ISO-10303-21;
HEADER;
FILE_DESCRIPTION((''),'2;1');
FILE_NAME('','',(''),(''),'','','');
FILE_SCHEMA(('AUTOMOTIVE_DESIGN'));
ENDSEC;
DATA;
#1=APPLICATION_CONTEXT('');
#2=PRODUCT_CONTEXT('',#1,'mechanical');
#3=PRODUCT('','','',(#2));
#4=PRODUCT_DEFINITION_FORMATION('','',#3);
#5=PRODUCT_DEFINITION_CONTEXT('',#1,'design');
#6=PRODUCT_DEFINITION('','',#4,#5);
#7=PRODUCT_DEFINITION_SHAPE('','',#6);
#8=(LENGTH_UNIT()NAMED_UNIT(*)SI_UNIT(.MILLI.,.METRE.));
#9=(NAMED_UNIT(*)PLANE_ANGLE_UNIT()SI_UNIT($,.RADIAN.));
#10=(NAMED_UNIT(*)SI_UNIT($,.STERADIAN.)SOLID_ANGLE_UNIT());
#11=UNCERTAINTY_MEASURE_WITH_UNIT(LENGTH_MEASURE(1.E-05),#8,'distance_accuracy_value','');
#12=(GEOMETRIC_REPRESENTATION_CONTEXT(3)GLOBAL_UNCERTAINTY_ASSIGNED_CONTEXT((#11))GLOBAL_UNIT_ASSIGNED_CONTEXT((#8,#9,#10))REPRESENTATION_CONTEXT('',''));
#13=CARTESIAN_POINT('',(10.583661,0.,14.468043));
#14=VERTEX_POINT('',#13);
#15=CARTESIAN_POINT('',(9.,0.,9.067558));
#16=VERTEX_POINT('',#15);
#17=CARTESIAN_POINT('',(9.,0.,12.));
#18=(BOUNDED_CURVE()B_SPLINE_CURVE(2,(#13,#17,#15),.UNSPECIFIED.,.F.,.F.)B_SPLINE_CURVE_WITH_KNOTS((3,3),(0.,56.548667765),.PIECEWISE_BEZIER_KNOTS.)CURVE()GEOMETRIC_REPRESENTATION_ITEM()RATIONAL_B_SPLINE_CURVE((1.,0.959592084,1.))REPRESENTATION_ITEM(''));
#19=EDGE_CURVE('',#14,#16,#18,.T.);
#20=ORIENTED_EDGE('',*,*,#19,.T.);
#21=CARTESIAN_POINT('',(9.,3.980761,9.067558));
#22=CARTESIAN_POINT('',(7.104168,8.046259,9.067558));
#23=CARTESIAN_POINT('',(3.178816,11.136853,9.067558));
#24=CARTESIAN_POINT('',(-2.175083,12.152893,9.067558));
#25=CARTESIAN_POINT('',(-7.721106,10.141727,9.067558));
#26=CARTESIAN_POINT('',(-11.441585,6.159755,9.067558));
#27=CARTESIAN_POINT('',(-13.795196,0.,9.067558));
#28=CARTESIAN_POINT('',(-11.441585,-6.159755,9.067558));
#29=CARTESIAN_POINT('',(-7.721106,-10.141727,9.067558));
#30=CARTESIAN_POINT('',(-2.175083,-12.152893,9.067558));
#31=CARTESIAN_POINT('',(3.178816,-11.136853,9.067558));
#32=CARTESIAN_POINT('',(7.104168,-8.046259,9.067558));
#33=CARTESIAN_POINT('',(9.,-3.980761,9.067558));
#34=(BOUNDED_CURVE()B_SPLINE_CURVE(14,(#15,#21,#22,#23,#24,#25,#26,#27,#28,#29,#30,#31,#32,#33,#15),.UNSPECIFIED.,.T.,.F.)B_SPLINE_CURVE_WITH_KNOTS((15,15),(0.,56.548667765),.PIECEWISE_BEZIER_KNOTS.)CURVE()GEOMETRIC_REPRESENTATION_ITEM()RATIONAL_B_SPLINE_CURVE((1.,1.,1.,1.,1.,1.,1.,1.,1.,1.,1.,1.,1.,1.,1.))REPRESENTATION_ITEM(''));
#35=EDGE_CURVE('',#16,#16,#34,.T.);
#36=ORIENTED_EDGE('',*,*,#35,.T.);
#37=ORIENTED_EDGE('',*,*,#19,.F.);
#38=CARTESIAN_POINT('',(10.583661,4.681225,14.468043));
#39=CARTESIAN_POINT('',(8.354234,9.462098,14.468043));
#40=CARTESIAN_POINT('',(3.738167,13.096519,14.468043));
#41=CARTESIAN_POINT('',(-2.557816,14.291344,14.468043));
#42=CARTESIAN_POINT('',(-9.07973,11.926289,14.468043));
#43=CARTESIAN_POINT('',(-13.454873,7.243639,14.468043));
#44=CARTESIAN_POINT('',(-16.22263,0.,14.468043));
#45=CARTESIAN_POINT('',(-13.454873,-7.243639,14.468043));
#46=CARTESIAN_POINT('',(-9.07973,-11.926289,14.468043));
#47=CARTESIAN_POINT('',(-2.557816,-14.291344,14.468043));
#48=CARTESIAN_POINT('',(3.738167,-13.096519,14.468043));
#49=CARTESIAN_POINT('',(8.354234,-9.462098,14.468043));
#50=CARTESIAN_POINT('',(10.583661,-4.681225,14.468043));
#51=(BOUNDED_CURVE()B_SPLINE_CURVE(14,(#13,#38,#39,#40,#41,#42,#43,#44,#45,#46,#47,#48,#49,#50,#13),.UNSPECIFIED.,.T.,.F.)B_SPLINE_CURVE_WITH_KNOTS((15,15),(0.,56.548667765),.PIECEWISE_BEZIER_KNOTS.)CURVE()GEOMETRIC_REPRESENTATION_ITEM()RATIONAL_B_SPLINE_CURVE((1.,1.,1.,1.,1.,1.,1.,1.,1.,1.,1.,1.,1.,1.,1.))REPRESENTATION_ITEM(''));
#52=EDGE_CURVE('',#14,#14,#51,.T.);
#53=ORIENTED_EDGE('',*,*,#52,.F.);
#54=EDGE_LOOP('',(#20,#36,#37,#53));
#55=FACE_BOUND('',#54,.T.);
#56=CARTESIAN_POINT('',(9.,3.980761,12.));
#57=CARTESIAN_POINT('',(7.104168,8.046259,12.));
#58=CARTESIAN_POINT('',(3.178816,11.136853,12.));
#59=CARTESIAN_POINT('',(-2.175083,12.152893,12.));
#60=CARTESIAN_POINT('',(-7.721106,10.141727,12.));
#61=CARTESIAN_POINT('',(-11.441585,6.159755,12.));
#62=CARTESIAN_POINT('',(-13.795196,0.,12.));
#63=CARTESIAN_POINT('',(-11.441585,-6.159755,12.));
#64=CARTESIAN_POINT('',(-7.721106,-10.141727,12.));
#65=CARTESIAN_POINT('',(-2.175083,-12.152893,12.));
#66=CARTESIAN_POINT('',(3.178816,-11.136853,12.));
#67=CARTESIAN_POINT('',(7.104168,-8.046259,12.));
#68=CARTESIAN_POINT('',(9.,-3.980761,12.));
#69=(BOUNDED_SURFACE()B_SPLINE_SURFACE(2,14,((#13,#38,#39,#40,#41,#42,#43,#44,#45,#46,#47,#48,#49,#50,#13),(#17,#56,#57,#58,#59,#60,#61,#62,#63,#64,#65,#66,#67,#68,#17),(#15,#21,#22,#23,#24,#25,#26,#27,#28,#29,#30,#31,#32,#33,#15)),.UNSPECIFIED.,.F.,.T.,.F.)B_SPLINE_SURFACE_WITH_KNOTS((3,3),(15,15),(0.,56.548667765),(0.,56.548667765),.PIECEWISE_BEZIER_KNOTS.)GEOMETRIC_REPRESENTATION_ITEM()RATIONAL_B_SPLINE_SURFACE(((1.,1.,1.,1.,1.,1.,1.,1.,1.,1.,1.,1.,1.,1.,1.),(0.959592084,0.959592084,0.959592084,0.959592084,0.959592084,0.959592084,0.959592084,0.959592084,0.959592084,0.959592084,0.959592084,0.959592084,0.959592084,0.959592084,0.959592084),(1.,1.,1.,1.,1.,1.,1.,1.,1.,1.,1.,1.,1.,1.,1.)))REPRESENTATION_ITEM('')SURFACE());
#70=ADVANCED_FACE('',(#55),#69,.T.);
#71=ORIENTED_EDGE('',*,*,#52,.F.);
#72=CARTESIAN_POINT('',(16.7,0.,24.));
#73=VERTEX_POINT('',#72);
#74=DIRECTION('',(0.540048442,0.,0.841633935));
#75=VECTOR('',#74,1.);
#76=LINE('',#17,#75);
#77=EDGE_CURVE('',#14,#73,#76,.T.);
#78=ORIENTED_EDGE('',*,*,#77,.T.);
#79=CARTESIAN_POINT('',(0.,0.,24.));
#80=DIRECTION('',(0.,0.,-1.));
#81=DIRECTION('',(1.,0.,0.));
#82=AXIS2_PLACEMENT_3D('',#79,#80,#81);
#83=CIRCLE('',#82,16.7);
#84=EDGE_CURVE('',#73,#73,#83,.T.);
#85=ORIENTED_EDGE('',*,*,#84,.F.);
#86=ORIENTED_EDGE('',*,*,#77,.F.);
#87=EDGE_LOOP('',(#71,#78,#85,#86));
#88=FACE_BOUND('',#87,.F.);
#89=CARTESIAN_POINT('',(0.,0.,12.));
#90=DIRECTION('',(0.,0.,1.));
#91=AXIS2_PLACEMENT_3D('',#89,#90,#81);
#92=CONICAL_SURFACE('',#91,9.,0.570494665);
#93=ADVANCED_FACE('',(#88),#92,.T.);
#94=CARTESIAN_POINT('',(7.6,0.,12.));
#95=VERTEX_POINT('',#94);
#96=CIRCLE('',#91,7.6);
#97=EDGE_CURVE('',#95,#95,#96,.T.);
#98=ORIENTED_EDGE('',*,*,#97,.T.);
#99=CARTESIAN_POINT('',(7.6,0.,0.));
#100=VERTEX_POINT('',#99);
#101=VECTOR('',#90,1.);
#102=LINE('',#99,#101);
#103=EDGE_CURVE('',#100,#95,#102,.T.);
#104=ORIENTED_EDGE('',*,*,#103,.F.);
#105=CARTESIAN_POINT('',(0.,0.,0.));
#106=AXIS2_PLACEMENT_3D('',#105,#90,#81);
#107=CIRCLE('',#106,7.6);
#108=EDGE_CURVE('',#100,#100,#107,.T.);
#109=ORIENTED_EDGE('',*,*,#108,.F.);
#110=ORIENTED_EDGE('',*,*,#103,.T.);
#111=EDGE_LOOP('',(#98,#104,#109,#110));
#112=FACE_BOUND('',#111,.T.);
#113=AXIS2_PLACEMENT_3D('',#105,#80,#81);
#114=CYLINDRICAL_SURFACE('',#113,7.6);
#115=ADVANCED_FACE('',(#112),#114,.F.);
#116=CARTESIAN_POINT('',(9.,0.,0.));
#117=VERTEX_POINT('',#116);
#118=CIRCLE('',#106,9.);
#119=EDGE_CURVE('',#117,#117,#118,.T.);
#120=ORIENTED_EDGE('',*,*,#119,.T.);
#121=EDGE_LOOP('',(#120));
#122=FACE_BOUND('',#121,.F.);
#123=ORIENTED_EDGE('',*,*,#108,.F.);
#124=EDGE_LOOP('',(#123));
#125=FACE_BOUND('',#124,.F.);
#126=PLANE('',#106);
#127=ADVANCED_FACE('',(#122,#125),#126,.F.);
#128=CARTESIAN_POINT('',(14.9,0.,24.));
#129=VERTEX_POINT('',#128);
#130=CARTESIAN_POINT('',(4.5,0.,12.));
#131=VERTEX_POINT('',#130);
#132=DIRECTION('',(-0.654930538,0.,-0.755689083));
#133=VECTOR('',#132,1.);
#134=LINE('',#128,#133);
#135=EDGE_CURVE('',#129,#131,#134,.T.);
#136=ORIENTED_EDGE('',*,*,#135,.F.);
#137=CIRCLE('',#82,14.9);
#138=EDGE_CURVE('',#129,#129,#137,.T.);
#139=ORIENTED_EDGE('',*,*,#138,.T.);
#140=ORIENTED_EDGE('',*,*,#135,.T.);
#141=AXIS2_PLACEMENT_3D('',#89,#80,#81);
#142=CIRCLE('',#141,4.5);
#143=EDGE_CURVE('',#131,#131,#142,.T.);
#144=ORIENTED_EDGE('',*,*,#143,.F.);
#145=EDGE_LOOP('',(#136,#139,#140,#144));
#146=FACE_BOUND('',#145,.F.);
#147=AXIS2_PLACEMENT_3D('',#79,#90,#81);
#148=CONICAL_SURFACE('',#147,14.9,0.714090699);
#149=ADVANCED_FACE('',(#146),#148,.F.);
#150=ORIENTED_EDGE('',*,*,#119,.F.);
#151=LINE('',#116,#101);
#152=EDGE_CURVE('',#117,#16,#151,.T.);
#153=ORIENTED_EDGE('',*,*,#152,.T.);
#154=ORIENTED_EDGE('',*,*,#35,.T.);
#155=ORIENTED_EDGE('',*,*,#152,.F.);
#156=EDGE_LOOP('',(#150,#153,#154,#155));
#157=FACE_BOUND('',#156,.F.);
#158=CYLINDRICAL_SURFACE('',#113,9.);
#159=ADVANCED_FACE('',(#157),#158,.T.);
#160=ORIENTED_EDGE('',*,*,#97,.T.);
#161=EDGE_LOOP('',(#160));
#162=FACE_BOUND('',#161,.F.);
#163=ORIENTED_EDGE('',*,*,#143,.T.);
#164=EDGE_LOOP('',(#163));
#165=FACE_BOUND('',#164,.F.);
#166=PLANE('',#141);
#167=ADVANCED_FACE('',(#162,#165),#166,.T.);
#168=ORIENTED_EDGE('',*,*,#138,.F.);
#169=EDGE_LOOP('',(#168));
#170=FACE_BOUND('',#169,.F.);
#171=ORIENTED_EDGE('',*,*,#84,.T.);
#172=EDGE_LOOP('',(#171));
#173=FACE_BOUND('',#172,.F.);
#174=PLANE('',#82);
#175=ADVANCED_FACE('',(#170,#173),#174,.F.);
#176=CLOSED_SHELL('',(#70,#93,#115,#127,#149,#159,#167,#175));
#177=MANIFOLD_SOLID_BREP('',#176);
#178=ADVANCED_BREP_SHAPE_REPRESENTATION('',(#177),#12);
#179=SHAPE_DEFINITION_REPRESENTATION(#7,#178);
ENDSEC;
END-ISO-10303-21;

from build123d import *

# Parameters (mm, degrees)
F0_R     = 9
F0_R_2   = 7.6
F3_DEPTH = 12
F5_R     = 10


# Not quite as in the source:
# - a feature names something its author has since deleted; it is built from what else it names


with BuildPart() as f3:
    # F0 (on Top) → F3 (new body)
    with BuildSketch(Plane.XY):
        Circle(F0_R)
        Circle(F0_R_2, mode=Mode.SUBTRACT)
    extrude(amount=F3_DEPTH)

    # F1 (on Front) → F4 (revolve)
    with BuildSketch(Plane.XZ):
        Polygon((14.9, 24), (4.5, 12), (9, 12), (16.7, 24), align=None)
    revolve(axis=Axis((0, 0, -6.017471198), (0, 0, -1)))

    # F5
    f5_edges = [f3.edges().sort_by_distance(p)[0] for p in [
        (-9, 0, 12),
    ]]
    fillet(f5_edges, radius=F5_R)


solid = f3.part
